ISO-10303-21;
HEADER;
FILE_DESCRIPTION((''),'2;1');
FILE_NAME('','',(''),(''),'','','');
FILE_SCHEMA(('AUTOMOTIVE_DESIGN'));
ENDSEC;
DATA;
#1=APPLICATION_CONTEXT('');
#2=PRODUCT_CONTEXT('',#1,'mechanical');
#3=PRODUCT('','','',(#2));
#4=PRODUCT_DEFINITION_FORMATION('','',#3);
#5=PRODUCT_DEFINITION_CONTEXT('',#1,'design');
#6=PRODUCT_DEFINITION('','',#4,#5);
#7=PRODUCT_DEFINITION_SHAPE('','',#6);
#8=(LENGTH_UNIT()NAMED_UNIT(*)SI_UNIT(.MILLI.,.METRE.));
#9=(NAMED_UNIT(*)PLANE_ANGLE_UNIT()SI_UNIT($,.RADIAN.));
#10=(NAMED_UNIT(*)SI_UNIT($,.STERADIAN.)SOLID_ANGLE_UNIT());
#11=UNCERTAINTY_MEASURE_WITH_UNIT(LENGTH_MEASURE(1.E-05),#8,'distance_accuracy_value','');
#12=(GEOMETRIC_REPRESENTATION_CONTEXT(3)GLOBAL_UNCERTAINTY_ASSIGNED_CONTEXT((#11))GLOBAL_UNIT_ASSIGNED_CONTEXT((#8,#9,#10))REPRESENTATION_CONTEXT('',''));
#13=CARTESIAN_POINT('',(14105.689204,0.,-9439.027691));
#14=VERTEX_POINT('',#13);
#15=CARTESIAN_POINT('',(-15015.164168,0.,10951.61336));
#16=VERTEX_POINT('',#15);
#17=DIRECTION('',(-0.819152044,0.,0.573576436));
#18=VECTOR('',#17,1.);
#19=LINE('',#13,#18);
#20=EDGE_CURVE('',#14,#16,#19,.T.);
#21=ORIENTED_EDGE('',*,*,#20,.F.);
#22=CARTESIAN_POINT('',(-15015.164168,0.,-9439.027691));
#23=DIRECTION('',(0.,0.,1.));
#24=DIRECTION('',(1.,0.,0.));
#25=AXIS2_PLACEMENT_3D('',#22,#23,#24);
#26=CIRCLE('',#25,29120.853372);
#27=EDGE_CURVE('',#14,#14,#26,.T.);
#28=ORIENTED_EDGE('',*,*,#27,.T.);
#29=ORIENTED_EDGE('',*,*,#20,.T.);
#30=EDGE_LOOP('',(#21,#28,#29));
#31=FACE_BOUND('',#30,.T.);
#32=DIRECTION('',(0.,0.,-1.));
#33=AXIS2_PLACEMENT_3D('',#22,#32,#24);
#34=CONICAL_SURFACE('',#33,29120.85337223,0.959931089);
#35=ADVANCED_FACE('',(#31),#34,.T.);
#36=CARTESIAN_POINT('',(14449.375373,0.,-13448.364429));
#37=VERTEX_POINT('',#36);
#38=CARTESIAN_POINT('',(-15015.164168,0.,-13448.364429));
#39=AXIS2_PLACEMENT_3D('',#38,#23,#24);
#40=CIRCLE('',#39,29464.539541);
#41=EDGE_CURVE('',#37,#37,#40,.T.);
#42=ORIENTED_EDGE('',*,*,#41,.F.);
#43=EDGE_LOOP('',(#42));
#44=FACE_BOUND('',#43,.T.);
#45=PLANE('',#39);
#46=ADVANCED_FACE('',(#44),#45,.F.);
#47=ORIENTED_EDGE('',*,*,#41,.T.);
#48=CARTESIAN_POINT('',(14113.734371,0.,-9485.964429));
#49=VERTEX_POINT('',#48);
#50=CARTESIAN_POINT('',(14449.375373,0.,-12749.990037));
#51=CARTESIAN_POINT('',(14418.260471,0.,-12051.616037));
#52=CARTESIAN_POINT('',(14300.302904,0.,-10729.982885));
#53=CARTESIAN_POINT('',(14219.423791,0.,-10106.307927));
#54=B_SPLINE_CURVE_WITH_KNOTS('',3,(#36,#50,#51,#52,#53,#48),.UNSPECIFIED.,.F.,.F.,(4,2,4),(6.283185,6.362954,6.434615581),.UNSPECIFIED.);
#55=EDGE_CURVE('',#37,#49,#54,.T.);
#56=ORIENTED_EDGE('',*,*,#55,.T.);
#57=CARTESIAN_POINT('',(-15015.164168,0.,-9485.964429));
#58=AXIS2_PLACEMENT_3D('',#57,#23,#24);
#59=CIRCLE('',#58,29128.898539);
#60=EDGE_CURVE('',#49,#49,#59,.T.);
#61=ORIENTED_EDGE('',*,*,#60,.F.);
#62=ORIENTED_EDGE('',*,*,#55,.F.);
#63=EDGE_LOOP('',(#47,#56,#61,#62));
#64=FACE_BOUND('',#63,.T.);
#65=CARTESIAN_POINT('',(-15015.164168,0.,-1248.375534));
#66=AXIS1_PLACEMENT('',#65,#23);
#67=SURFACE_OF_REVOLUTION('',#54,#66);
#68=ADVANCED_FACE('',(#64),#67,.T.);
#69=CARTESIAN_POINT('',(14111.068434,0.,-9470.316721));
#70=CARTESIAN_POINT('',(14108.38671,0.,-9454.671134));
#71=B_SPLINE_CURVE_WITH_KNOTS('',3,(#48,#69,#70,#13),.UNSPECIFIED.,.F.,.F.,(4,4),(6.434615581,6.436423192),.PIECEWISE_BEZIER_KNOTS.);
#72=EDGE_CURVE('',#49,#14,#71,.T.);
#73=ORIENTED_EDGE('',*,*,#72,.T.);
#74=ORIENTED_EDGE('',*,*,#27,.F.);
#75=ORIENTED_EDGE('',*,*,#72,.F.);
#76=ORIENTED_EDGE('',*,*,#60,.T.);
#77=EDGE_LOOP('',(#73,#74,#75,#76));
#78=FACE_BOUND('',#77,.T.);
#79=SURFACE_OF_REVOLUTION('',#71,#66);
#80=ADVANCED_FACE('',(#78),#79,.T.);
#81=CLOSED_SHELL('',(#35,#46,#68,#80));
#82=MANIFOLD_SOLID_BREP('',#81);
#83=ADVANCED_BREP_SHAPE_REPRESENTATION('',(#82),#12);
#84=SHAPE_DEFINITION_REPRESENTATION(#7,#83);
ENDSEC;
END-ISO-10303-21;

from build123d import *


# Not quite as in the source:
# - the dataset's text gives a spline's control points without its knots; the knots are read off the source's solid


with BuildPart() as f1:
    # F0 (on Front) → F1 (revolve)
    with BuildSketch(Plane.XZ):
        with BuildLine():
            Line((-15015.1641677809, -9485.9644285342), (14113.7343711964, -9485.9644285342))
            add(Edge.make_bspline(
                [(14113.7343711964, -9485.9644285342), (14111.0684335143, -9470.3167211759), (14108.3867099418, -9454.671133503), (14105.6892044539, -9439.0276907001)],
                knots=[6.4346155813, 6.4346155813, 6.4346155813, 6.4346155813, 6.4364231918, 6.4364231918, 6.4364231918, 6.4364231918], degree=3))
            Line((14105.6892044538, -9439.0276907002), (-15015.1641677809, 10951.6133596381))
            Line((-15015.1641677809, 10951.6133596381), (-15015.1641677809, -9485.9644285342))
        make_face()
        with BuildLine():
            Line((-15015.1641677809, -13448.3644285342), (14449.3753730529, -13448.3644285342))
            add(Edge.make_bspline(
                [(14449.3753730529, -13448.3644285342), (14449.3753730529, -12749.9900368383), (14418.2604711201, -12051.6160368424), (14300.3029043107, -10729.9828852019), (14219.4237908412, -10106.3079274051), (14113.7343711964, -9485.9644285342)],
                knots=[6.283185, 6.283185, 6.283185, 6.283185, 6.362954, 6.362954, 6.4346155813, 6.4346155813, 6.4346155813, 6.4346155813], degree=3))
            Line((14113.7343711964, -9485.9644285342), (-15015.1641677809, -9485.9644285342))
            Line((-15015.1641677809, -9485.9644285342), (-15015.1641677809, -13448.3644285342))
        make_face()
    revolve(axis=Axis((-15015.1641677809, 0, -1248.375534448), (0, 0, 1)))


solid = f1.part
